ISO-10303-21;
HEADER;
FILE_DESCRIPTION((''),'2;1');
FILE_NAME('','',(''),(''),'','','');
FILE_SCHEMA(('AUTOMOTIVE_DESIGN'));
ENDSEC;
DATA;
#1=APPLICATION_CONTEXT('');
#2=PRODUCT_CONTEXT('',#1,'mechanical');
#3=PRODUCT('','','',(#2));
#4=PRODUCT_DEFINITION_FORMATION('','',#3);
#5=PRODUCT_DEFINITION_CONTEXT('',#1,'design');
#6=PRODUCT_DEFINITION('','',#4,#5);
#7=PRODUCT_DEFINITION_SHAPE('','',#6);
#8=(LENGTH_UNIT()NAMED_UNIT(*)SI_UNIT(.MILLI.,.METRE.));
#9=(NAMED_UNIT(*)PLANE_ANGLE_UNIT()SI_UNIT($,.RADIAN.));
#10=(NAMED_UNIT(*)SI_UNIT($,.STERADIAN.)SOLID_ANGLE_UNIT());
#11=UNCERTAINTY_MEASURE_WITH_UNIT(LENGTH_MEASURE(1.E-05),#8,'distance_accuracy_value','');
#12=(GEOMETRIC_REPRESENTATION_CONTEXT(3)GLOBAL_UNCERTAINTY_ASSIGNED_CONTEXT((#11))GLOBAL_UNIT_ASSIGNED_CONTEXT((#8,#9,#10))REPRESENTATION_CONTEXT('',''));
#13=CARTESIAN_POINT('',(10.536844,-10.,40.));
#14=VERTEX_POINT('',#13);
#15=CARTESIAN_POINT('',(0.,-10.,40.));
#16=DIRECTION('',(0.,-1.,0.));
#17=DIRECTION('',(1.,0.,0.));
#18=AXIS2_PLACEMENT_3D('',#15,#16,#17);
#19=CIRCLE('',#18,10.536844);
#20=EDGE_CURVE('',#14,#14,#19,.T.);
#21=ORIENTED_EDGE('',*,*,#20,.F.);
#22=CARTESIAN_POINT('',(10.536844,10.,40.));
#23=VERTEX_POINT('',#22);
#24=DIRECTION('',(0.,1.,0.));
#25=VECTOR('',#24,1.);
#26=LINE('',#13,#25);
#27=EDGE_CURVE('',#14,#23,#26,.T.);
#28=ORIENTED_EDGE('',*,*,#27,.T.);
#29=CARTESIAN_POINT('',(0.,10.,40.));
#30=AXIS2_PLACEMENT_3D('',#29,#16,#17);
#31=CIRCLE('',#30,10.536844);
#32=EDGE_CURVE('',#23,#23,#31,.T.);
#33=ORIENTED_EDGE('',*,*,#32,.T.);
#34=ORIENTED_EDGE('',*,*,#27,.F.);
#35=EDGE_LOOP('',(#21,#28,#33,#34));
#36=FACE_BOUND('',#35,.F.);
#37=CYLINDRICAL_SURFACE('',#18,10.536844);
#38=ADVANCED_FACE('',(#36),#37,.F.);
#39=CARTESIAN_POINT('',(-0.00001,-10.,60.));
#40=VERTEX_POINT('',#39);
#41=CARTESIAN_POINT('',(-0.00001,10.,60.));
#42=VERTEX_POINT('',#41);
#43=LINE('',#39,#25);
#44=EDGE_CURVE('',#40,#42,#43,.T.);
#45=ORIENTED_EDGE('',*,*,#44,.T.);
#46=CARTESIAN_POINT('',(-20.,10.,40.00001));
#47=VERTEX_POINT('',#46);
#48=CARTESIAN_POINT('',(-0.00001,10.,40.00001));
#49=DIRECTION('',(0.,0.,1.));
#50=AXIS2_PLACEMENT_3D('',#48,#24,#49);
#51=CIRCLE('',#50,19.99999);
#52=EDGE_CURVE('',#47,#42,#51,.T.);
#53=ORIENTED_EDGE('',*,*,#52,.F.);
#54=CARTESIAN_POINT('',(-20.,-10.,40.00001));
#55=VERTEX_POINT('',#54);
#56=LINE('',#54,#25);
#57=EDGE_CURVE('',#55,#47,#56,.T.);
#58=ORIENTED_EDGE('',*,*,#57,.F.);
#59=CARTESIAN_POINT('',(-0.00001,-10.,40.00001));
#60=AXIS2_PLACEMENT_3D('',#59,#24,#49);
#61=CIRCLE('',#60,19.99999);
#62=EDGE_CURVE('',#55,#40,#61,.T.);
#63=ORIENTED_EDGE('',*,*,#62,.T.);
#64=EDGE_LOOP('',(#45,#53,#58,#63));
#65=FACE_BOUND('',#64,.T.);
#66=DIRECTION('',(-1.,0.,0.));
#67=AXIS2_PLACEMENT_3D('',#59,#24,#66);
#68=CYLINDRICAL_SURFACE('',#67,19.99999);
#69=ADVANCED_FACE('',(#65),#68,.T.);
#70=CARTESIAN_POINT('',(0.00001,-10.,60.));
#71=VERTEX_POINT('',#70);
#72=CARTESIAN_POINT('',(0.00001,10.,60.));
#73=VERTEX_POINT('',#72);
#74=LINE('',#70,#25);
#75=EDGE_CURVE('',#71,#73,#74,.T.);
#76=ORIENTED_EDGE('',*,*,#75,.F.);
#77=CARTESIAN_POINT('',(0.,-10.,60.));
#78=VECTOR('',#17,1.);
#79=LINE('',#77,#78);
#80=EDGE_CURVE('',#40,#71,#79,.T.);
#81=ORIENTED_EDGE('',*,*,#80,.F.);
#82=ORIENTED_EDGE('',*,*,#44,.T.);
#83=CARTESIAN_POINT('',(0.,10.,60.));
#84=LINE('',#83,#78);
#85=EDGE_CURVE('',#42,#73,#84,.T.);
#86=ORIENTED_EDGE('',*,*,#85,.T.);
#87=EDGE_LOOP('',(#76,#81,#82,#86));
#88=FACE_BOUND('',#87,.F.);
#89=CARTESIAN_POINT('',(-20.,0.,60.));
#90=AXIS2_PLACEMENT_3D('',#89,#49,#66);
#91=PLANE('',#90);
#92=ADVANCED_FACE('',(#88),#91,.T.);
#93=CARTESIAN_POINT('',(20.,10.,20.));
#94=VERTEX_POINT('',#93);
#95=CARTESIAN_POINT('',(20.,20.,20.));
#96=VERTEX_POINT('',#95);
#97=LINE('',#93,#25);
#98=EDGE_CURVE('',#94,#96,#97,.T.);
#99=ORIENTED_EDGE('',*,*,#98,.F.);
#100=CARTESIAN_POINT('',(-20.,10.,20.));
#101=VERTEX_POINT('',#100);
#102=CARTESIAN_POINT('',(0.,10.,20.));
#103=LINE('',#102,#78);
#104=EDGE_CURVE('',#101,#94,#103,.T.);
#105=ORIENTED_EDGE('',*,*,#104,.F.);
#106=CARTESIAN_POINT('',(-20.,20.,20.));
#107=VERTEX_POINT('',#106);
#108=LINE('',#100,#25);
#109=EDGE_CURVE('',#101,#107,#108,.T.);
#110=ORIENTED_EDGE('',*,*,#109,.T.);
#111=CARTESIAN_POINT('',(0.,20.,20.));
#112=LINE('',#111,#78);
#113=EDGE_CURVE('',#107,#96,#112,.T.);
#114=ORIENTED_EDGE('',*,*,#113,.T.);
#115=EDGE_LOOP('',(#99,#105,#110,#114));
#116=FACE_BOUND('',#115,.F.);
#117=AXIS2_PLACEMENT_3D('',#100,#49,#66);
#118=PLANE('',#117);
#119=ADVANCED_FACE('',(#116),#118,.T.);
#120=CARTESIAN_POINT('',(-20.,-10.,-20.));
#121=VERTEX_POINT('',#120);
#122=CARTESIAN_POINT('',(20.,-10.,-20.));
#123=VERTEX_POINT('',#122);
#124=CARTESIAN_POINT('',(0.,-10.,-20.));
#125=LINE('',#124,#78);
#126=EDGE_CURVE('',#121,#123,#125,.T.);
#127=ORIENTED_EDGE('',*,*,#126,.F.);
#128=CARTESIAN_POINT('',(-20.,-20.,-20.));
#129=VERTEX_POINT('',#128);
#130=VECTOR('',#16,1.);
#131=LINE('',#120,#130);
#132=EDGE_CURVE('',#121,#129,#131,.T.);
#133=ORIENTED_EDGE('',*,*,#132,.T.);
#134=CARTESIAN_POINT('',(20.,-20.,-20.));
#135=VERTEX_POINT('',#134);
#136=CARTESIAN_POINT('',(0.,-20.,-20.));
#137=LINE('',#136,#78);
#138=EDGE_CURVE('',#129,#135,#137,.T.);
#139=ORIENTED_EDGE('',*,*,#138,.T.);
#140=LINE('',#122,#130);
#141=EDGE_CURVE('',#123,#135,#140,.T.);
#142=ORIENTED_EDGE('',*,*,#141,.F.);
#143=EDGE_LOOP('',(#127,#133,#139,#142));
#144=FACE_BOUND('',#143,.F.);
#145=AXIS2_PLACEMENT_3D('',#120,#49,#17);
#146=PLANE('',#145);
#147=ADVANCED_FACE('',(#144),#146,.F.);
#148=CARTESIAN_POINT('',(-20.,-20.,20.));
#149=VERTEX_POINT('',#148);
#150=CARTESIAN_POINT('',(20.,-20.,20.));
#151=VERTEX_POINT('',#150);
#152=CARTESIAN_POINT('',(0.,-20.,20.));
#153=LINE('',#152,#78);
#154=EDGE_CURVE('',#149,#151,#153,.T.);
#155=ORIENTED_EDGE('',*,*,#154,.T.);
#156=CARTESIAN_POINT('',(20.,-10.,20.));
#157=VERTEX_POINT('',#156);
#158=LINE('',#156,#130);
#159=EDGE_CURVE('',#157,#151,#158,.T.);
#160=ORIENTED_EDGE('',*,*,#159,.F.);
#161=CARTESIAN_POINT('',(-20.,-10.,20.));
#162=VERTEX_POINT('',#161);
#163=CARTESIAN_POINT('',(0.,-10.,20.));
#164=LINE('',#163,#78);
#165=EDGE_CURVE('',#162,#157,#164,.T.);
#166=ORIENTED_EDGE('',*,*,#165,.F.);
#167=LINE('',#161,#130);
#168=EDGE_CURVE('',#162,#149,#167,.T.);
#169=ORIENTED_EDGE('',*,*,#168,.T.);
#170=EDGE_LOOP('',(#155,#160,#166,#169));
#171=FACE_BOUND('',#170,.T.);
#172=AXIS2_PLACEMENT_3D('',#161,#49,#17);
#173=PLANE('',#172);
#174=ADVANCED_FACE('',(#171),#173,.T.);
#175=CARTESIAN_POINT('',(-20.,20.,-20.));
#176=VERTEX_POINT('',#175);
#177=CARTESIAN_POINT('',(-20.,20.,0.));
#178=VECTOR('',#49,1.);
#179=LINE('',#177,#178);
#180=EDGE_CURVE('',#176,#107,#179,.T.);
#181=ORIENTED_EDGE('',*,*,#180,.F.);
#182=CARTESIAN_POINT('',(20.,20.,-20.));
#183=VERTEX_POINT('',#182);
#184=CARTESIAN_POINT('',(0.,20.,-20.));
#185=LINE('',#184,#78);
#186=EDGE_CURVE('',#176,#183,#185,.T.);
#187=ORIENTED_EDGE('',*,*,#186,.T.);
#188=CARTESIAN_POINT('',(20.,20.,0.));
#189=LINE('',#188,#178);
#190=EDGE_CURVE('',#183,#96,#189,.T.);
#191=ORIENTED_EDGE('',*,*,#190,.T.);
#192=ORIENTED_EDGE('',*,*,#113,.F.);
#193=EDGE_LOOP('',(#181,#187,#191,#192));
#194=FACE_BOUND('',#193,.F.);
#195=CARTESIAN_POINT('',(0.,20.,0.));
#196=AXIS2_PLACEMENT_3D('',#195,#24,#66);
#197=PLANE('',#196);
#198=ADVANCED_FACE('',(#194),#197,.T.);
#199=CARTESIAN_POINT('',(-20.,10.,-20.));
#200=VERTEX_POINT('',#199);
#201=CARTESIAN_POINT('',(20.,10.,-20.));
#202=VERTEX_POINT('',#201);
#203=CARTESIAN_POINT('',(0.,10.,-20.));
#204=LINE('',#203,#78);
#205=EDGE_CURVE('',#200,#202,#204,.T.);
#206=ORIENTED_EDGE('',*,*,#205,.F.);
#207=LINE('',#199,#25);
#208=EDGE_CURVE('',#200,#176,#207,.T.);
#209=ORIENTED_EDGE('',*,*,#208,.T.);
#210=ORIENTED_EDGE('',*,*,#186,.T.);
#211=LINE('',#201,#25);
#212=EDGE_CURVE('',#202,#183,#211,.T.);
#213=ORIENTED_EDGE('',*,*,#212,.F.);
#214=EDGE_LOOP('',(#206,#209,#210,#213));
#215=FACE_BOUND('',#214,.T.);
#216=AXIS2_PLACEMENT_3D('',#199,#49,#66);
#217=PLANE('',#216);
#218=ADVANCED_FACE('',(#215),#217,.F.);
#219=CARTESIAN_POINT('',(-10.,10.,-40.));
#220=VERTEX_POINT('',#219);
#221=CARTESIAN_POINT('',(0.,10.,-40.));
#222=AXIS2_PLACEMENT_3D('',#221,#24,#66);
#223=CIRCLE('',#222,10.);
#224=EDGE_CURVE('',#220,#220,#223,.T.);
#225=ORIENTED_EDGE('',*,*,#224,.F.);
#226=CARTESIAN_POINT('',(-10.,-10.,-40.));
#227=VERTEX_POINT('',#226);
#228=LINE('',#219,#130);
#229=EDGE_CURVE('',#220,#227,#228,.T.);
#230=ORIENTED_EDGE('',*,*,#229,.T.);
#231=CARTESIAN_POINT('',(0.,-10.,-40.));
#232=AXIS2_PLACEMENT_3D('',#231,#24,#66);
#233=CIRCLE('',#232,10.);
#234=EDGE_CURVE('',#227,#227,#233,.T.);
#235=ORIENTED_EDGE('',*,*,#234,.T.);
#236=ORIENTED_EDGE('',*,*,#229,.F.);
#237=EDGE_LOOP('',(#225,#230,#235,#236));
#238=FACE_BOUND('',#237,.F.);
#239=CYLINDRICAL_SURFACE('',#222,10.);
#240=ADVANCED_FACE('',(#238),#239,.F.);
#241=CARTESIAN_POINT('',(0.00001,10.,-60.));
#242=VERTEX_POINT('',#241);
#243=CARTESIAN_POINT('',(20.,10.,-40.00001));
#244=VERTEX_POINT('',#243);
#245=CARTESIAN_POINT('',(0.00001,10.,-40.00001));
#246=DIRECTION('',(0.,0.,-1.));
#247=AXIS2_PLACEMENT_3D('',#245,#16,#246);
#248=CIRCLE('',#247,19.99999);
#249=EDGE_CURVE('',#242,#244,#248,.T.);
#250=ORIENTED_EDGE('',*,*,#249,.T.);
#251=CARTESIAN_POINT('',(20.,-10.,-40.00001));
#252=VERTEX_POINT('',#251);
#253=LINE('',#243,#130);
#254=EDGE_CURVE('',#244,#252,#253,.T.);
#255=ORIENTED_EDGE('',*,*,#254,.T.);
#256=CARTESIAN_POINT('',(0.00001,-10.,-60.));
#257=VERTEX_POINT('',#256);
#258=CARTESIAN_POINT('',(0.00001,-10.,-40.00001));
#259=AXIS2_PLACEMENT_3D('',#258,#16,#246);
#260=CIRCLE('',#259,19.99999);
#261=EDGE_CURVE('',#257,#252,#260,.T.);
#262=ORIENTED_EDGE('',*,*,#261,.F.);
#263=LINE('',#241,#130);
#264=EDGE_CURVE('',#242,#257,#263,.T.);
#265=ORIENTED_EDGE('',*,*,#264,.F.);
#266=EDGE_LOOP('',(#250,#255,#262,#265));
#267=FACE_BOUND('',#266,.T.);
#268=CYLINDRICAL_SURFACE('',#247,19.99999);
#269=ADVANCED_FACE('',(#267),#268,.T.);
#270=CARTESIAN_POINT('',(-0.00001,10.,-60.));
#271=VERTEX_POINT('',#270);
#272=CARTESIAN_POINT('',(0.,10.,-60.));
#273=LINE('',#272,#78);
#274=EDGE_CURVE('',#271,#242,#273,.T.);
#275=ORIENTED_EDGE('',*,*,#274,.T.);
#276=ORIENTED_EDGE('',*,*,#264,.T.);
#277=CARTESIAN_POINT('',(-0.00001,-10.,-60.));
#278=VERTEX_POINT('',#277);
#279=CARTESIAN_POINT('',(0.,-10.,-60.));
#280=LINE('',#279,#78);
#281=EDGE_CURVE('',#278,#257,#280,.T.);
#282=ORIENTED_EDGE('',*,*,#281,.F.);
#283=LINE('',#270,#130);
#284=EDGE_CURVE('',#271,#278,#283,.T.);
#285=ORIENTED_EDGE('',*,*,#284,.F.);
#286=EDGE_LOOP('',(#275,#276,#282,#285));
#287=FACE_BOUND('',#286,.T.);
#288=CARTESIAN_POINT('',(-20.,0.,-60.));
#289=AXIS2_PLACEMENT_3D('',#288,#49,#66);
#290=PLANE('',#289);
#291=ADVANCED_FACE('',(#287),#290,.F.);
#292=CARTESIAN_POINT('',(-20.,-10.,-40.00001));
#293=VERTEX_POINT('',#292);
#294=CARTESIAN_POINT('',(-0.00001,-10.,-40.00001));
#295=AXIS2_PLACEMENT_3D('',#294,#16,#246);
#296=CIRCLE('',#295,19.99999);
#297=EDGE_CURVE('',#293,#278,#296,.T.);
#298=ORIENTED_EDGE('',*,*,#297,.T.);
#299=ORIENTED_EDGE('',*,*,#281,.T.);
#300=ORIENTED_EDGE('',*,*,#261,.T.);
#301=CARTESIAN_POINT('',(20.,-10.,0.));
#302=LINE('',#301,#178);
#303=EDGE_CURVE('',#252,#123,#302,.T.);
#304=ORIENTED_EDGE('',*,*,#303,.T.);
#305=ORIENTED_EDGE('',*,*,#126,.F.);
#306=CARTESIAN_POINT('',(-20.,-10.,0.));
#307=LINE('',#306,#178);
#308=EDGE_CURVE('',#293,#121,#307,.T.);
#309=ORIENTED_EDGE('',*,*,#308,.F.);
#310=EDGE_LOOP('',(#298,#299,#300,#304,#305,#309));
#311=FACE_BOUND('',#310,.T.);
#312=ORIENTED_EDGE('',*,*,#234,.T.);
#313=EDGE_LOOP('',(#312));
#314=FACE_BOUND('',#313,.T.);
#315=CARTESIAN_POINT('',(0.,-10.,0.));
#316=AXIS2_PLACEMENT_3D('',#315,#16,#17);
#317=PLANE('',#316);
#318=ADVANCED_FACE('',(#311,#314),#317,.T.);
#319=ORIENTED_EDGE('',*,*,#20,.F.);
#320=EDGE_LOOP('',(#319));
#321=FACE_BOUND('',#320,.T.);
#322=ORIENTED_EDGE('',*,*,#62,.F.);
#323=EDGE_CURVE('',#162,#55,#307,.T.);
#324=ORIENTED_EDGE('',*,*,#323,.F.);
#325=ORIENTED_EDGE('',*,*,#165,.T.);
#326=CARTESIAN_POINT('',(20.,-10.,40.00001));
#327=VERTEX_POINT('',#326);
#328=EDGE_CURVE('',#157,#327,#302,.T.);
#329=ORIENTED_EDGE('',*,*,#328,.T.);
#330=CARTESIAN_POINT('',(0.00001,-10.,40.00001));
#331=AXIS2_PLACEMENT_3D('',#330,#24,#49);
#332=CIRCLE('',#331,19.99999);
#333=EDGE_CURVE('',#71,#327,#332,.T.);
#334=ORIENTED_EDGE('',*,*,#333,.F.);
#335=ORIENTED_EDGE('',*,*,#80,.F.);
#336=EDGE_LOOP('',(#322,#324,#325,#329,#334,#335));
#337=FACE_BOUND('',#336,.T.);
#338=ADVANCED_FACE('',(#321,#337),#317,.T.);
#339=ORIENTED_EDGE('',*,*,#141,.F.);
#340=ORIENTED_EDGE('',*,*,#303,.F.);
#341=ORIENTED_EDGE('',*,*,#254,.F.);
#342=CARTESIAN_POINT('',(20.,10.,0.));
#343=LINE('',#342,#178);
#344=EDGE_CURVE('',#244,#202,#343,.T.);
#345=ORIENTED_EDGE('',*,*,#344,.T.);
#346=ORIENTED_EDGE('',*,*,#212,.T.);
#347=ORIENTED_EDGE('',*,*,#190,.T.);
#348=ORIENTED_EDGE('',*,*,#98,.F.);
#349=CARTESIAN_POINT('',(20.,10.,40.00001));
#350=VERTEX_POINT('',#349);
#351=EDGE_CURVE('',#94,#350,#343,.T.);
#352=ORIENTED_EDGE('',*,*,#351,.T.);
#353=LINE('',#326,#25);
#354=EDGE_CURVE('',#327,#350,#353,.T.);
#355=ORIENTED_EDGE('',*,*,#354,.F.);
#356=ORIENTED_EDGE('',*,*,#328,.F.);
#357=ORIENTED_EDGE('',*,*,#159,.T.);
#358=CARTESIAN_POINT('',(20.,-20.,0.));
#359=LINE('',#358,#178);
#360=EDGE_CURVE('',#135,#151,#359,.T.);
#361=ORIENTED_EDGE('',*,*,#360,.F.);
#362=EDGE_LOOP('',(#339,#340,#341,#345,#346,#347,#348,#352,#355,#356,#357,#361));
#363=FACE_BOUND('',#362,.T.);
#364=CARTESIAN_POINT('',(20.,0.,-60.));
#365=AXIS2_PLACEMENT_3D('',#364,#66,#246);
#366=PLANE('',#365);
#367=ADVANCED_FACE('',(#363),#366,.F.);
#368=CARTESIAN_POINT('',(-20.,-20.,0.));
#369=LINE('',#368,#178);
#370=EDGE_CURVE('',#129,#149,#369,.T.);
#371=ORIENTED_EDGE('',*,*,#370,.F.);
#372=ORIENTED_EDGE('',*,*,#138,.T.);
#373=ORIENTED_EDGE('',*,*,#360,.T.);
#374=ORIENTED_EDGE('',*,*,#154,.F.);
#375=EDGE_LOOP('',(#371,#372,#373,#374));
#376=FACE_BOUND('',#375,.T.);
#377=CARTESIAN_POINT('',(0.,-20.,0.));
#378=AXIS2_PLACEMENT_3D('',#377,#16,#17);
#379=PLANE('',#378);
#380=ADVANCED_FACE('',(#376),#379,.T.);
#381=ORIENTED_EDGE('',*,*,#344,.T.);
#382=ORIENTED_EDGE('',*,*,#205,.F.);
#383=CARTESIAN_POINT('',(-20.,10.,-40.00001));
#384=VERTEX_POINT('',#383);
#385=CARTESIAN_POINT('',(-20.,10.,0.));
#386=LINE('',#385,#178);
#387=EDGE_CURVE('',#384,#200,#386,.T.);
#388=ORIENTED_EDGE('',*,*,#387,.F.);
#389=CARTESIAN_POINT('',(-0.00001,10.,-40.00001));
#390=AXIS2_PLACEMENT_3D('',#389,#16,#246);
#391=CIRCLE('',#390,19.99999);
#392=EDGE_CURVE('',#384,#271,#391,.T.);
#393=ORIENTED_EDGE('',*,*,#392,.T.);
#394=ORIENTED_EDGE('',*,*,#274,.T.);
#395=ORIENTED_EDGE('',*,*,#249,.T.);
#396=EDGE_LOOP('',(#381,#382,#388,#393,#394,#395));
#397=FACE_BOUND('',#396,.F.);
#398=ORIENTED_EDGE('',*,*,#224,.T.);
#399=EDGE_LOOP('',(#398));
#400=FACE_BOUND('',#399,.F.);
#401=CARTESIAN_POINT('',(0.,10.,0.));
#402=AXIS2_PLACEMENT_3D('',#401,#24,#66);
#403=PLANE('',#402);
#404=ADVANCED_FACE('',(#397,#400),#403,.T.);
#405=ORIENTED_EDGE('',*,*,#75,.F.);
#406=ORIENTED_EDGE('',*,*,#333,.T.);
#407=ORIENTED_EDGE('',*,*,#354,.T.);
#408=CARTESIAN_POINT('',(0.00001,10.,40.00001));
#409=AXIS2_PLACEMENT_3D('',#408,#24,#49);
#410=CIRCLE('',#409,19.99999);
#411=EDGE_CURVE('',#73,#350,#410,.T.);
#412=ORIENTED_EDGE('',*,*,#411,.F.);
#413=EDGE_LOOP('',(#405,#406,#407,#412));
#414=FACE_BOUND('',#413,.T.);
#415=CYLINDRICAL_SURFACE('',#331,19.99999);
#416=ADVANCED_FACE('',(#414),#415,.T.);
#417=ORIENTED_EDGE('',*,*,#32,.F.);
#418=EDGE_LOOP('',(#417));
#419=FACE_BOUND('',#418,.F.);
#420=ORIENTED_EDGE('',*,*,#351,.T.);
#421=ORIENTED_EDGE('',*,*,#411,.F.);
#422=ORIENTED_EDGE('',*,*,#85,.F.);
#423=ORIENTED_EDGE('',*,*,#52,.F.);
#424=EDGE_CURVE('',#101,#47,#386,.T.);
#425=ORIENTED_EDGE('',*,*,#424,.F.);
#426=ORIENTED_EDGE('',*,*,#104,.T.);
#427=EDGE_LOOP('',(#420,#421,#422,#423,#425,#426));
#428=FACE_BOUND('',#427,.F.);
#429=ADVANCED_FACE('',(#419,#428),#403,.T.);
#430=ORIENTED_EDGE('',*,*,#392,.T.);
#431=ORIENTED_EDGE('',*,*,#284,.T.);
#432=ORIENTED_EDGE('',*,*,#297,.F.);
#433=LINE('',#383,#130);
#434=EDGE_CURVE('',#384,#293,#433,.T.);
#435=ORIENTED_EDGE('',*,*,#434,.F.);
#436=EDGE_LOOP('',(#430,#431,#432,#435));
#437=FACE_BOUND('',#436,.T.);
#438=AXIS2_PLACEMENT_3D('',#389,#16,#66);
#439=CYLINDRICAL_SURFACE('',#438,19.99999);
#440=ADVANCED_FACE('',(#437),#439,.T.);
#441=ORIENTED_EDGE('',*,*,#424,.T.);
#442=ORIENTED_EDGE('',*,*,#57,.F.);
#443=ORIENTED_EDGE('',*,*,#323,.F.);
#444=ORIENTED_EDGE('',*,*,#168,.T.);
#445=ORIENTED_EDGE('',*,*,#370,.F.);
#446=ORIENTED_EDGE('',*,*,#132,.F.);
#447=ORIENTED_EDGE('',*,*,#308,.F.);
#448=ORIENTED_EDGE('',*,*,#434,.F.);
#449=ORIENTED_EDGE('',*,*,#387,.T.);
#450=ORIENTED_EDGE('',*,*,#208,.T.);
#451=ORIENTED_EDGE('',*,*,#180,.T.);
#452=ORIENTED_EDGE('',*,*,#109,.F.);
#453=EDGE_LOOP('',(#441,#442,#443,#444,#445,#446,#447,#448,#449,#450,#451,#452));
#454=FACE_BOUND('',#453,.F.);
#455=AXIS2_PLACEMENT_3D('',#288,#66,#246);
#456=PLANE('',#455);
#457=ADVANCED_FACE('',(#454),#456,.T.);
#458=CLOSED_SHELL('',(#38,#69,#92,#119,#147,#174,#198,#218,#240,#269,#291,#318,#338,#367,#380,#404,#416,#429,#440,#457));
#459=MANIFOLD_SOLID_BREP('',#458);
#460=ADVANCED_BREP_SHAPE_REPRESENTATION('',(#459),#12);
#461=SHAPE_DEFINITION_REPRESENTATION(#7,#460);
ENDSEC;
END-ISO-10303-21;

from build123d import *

# Parameters (mm, degrees)
F0_W     = 40
F0_H     = 120
F1_DEPTH = 10
F2_W     = 40
F2_H     = 40
F3_DEPTH = 10
F5_R     = 10.5368442401
F6_DEPTH = 20
F7_R     = 10
F8_DEPTH = 20
F9_R     = 19.99999
F10_R    = 19.99999


# Not quite as in the source:
# - a fillet or chamfer is up to 0.001 mm smaller than in the source, because OpenCascade refuses the exact size


with BuildPart() as f1:
    # F0 (on Front) → F1 (new body)
    with BuildSketch(Plane.XZ):
        Rectangle(F0_W, F0_H)
    extrude(amount=F1_DEPTH)

    # F2 (on face) → F3 (join)
    with BuildSketch(Plane.XZ.offset(10)):
        Rectangle(F2_W, F2_H)
    extrude(amount=F3_DEPTH)

    # F4: F1 across face


with BuildPart() as f1_1:
    add(f1.part)
    add(f1.part.mirror(Plane(origin=(0, 0, 0), x_dir=(1, 0, 0), z_dir=(0, 1, 0))))

    # F5 (on face) → F6 (cut, through all)
    with BuildSketch(Plane.XZ.offset(10)):
        with Locations((0, 40)):
            Circle(F5_R)
    extrude(amount=-F6_DEPTH, mode=Mode.SUBTRACT)

    # F7 (on face) → F8 (cut, through all)
    with BuildSketch(Plane(origin=(0, 10, 0), x_dir=(-1, 0, 0), z_dir=(0, 1, 0))):
        with Locations((0, -40)):
            Circle(F7_R)
    extrude(amount=-F8_DEPTH, mode=Mode.SUBTRACT)

    # F9 (radius 20 in the source; OpenCascade refuses exactly that, so slightly less here)
    f9_edges = [f1_1.edges().sort_by_distance(p)[0] for p in [
        (-20, 0, 60),
        (20, 0, 60),
    ]]
    fillet(f9_edges, radius=F9_R)

    # F10 (radius 20 in the source; OpenCascade refuses exactly that, so slightly less here)
    f10_edges = [f1_1.edges().sort_by_distance(p)[0] for p in [
        (20, 0, -60),
        (-20, 0, -60),
    ]]
    fillet(f10_edges, radius=F10_R)


solid = f1_1.part
